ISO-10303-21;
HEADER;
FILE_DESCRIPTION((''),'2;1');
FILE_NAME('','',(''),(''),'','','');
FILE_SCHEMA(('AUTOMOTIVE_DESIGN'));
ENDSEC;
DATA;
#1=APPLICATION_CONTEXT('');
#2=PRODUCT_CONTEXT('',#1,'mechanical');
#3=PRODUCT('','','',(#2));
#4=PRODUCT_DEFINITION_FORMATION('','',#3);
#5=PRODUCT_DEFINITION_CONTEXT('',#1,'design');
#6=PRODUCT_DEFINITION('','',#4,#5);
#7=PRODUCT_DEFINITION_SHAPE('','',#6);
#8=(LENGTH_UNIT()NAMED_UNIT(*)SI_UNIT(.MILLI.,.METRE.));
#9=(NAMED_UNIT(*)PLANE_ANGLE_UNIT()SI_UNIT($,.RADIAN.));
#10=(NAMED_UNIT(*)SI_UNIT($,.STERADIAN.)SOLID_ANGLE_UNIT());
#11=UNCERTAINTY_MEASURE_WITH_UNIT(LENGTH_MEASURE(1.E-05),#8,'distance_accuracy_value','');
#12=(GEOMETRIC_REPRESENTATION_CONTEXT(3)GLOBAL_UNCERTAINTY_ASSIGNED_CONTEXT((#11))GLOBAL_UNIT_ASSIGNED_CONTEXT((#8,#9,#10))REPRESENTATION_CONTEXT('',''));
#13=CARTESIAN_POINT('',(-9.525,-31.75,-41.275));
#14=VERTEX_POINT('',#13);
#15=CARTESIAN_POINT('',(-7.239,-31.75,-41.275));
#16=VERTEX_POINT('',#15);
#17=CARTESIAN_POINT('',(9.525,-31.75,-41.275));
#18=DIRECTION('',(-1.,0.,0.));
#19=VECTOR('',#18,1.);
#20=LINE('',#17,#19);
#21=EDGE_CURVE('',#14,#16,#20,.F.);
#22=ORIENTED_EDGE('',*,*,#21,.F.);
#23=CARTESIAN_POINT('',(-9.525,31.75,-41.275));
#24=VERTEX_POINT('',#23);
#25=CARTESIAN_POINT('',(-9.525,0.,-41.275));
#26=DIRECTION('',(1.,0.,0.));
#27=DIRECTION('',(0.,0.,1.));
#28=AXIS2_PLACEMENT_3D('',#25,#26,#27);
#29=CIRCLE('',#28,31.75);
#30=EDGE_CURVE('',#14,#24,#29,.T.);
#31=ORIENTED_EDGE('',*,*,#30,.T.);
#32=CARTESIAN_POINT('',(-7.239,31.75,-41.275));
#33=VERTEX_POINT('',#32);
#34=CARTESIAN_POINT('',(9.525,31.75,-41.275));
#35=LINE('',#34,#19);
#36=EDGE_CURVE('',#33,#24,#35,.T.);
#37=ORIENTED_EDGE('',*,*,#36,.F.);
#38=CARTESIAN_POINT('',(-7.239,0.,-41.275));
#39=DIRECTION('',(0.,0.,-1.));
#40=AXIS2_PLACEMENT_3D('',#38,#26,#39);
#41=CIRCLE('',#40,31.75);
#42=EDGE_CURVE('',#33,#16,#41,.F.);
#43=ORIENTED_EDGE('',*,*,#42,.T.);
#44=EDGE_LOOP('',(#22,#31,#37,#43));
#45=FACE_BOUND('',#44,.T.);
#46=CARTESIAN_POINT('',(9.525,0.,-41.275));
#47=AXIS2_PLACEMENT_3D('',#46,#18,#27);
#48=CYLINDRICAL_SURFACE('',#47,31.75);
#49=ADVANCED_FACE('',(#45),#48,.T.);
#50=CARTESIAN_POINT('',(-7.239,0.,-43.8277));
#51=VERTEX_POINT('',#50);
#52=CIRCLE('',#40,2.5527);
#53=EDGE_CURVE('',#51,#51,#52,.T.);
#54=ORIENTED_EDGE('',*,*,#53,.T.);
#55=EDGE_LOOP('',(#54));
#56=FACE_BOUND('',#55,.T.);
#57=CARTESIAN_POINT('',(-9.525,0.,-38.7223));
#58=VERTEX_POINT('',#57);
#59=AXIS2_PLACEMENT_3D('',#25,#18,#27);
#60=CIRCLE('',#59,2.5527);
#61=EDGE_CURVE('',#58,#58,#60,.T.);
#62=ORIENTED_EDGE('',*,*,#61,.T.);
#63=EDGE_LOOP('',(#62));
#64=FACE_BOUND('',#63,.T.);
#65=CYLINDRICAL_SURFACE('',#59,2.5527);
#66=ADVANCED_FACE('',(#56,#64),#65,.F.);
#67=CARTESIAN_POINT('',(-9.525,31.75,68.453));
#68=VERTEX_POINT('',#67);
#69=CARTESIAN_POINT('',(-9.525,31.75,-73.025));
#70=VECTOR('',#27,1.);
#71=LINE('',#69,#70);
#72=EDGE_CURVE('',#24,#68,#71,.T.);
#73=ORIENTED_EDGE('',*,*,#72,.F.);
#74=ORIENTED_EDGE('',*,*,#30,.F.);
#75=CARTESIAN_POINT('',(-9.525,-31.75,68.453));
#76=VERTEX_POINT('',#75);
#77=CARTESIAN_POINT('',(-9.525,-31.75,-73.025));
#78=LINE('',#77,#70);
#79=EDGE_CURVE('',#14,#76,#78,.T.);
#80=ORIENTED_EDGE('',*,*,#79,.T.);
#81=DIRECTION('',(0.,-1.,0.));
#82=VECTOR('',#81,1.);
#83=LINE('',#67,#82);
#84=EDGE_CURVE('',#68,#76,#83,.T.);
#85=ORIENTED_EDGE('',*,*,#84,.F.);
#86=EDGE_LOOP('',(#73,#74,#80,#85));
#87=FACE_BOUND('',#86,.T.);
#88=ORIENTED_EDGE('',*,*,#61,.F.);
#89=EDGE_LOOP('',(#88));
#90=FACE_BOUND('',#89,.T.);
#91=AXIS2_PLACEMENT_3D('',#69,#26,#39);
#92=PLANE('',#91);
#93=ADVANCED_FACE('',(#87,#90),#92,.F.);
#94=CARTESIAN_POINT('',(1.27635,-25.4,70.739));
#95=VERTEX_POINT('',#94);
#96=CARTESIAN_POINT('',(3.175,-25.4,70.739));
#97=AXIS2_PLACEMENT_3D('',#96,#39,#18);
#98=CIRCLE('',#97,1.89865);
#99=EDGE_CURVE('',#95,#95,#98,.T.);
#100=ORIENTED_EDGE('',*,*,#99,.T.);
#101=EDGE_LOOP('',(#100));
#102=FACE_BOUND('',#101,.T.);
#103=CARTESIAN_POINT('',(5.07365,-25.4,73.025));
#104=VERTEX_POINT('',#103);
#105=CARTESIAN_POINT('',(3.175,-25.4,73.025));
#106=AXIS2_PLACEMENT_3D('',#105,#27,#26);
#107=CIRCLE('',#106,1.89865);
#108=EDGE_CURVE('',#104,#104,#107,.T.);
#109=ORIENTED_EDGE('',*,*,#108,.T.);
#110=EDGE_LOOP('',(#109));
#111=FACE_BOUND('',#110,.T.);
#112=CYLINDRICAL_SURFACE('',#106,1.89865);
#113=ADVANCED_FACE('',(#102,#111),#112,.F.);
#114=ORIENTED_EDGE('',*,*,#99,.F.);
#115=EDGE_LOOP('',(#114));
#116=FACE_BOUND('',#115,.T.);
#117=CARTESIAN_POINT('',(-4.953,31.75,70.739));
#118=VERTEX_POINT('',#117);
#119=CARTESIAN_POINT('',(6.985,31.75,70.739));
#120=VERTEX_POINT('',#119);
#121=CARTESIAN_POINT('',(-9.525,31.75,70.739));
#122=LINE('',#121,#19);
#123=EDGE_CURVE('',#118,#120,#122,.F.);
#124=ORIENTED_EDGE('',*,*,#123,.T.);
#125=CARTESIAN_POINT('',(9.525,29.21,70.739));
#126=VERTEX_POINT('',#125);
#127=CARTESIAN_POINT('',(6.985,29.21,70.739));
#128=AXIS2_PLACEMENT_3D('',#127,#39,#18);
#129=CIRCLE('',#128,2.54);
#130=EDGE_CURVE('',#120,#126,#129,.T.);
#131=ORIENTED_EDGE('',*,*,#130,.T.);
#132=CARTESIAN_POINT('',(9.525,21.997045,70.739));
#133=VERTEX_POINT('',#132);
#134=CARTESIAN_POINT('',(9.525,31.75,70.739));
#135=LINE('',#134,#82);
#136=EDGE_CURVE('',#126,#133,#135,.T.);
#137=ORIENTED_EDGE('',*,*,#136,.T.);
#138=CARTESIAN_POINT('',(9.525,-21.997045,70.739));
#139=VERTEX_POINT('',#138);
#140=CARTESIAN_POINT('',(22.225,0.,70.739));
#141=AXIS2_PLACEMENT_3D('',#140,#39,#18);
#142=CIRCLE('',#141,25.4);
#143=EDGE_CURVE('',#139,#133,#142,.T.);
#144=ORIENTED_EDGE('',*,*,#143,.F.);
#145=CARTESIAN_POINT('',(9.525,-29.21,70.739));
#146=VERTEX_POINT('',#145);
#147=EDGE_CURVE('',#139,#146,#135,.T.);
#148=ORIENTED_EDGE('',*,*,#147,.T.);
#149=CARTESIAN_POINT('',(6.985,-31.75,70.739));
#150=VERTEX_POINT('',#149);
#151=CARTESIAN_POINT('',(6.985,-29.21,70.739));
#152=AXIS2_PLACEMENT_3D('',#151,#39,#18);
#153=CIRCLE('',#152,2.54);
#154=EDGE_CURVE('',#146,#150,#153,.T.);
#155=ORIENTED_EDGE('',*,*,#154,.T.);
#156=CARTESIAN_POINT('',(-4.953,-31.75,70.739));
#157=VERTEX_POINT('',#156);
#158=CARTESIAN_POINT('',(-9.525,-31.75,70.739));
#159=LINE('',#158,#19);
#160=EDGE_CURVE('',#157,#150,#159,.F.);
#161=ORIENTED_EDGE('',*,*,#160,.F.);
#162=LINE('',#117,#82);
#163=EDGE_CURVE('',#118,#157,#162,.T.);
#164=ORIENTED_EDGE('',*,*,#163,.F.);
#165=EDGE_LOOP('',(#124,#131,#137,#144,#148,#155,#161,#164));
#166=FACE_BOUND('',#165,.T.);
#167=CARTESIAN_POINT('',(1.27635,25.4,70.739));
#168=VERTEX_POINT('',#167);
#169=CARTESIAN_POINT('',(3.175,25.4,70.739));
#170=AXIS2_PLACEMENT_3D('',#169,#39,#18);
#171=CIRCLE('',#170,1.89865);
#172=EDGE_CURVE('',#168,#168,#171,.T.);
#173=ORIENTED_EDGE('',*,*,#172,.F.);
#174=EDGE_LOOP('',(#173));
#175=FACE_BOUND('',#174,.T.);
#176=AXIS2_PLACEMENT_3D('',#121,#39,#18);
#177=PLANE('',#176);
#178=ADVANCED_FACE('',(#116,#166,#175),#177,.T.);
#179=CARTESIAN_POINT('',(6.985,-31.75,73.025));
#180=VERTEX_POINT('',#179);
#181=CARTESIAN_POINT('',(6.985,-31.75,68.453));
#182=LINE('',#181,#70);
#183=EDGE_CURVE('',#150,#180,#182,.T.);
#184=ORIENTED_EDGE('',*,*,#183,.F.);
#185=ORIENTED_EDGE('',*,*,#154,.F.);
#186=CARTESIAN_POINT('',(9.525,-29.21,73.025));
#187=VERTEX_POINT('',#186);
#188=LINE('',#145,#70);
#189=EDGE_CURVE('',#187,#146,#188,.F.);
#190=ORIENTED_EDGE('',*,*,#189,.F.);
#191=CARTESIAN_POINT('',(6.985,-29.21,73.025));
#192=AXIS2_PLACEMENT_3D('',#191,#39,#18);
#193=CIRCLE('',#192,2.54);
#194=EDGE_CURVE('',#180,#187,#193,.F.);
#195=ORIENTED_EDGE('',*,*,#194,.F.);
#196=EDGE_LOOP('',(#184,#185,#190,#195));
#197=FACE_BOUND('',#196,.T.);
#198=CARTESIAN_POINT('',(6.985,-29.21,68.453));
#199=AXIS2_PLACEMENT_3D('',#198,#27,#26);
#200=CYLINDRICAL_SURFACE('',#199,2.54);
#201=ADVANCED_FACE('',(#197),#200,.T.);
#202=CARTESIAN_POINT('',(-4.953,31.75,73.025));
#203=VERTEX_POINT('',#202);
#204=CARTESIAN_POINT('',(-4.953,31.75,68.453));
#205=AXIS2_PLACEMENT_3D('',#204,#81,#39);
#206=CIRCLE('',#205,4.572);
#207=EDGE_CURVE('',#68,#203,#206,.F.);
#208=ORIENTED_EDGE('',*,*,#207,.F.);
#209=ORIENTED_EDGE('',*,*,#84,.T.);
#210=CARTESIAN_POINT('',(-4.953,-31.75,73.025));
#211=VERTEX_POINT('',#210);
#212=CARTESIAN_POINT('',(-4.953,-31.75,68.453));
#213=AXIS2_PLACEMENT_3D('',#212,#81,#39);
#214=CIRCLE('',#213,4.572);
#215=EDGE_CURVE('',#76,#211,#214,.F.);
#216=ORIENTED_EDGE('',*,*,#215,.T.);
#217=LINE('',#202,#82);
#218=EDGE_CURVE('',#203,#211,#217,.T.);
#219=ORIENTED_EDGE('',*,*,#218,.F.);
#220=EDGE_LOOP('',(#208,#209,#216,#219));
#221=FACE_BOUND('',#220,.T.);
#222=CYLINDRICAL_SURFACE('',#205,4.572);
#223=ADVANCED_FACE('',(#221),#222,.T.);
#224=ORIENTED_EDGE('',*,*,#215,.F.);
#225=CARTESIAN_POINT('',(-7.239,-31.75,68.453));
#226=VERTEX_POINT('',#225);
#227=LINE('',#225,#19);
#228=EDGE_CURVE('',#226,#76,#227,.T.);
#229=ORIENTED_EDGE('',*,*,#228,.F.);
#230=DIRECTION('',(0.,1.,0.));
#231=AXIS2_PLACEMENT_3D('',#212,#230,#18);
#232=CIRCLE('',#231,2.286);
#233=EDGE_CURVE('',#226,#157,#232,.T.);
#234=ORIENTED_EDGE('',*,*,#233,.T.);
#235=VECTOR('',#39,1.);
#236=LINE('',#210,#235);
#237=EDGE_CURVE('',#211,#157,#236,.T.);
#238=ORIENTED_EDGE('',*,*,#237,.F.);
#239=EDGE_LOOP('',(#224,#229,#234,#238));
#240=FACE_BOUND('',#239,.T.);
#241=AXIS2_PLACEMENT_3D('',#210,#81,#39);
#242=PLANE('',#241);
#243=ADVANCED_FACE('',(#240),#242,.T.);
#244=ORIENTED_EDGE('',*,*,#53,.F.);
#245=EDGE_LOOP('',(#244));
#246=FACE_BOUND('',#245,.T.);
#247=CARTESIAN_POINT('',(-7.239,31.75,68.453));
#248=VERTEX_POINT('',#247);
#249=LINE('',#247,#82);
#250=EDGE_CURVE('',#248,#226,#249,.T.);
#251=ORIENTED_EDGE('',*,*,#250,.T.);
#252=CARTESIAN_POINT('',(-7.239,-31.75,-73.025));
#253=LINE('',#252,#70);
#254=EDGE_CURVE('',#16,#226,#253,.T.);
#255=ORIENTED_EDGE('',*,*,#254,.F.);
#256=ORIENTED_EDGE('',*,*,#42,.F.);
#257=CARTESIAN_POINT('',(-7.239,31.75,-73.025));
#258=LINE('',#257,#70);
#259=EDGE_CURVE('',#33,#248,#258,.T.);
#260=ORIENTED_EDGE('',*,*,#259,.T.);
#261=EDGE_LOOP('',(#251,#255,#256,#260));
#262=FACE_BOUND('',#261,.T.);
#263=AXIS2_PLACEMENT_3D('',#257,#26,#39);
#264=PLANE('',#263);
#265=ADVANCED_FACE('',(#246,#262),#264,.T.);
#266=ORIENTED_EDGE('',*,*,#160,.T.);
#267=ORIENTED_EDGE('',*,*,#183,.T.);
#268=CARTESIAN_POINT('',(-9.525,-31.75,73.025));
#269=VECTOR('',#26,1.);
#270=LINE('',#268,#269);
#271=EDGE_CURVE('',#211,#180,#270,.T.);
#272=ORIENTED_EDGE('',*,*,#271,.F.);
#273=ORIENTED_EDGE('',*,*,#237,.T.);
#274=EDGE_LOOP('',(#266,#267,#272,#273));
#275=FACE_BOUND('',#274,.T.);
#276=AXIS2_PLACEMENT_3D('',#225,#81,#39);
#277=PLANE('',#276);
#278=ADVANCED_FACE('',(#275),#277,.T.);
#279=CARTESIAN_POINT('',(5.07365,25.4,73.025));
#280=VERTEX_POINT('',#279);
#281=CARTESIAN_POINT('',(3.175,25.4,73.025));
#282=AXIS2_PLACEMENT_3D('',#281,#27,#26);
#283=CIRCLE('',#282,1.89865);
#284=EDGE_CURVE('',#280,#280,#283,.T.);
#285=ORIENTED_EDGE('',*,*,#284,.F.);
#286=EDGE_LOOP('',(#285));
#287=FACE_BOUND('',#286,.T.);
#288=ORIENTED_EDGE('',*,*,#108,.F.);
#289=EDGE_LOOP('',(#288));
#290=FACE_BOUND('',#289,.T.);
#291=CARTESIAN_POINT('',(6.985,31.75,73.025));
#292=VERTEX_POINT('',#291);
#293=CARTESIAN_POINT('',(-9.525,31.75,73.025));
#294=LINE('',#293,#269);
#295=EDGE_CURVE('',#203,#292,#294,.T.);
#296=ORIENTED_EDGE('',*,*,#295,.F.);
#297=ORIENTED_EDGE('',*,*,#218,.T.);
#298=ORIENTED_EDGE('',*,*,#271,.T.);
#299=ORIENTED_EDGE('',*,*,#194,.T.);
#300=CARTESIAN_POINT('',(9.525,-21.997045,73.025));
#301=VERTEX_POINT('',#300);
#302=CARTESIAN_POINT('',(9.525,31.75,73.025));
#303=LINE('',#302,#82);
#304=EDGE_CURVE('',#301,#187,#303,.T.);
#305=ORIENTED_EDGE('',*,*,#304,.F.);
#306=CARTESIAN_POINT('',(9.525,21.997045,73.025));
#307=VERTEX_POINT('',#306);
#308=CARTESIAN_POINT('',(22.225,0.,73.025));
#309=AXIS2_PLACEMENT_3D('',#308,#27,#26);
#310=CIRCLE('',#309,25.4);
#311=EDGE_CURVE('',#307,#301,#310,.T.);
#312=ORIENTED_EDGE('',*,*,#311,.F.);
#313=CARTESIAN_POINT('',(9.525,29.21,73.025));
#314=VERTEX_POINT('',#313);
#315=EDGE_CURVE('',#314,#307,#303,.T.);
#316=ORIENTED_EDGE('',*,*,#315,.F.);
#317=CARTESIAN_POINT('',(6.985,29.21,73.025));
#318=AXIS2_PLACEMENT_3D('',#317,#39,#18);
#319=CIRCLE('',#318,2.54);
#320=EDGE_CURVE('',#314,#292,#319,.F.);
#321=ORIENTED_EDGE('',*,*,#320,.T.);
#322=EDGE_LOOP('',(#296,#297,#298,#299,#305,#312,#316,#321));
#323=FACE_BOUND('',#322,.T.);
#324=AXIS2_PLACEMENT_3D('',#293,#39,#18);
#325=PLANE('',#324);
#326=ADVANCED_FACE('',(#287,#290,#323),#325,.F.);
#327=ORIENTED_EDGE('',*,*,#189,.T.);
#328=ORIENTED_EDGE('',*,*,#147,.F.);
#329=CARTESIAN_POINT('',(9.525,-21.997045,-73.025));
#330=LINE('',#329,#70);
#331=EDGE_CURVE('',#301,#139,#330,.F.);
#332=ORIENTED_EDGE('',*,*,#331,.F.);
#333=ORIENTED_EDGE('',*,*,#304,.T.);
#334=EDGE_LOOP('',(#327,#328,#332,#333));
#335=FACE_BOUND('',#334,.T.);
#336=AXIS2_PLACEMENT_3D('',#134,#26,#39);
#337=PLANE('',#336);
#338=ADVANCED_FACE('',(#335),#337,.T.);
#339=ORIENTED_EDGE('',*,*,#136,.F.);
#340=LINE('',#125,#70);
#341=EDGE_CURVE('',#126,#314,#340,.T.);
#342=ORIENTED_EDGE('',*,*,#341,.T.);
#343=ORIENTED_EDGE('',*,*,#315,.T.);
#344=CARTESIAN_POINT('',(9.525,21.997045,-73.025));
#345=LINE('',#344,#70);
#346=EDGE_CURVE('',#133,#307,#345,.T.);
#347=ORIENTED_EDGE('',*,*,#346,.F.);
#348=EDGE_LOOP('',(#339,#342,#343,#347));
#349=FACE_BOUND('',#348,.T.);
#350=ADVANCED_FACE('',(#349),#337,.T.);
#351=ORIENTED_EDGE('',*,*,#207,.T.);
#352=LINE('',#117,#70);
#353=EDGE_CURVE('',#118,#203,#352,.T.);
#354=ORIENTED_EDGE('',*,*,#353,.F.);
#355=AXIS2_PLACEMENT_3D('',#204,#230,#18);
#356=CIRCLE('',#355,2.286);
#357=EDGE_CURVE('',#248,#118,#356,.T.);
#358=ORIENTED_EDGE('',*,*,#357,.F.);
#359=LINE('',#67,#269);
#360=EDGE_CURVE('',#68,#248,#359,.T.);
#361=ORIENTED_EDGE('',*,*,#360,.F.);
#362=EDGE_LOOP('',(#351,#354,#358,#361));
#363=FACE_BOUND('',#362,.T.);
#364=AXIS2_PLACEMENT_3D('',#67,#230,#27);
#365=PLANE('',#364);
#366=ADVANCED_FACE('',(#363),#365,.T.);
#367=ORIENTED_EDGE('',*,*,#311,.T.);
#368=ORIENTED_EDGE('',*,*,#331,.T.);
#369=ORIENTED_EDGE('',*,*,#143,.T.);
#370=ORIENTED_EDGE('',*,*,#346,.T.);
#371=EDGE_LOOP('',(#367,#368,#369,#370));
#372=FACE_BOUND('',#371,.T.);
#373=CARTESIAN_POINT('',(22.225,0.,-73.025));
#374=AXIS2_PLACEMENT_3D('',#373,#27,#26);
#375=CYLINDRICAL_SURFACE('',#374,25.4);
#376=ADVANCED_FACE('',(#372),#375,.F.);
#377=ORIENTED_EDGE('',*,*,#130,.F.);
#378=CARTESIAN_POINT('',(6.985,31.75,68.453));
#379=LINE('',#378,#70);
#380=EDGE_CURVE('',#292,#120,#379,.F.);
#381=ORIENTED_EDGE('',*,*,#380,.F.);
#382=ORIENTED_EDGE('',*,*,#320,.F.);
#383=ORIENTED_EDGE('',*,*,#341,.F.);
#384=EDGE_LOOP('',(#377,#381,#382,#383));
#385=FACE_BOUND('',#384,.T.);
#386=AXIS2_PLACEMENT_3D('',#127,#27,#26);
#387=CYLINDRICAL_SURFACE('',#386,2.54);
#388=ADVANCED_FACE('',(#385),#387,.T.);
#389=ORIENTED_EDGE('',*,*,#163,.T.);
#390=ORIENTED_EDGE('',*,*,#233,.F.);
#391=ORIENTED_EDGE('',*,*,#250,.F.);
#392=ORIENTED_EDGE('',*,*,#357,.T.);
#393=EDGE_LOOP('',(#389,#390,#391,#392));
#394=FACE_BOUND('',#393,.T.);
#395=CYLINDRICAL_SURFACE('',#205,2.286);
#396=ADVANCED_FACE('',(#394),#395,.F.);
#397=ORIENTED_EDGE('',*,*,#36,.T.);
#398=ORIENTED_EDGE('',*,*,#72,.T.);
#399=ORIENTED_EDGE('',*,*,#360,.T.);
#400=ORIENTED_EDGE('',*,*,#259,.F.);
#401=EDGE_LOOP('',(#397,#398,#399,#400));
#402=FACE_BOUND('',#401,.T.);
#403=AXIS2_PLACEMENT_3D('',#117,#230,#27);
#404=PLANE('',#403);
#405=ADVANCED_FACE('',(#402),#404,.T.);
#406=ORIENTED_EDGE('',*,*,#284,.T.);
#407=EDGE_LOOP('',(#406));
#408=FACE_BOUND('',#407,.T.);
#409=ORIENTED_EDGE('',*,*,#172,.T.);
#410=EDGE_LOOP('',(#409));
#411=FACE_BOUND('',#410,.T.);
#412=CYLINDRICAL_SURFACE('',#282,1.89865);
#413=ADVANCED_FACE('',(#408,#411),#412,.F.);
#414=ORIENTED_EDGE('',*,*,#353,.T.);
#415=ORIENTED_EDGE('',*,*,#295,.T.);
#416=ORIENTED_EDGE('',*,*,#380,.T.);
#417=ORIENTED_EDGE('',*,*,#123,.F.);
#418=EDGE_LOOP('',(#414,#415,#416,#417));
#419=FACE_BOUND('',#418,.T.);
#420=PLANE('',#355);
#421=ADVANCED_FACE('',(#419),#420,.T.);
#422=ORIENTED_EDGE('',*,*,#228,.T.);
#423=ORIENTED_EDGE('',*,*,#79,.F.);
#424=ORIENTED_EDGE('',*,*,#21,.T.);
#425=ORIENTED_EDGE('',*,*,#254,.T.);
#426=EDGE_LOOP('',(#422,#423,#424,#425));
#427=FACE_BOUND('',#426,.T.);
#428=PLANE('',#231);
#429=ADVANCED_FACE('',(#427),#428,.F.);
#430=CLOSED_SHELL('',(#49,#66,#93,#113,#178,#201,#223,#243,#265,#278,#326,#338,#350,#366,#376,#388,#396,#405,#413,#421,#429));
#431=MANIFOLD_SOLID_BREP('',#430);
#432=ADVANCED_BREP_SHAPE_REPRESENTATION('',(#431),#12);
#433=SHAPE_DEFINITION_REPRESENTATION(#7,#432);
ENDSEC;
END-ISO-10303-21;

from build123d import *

# Parameters (mm, degrees)
BASE_FLANGE1_DEPTH           = 31.75
SKETCH6_R                    = 25.4
CUT_EXTRUDE1_DEPTH           = 150.764450471
FILLET1_R                    = 2.54
CUT_EXTRUDE2_DEPTH           = 82.875610685
F_7_0_201_DIAMETER_HOLE1_D   = 5.1054
F_25_0_1495_DIAMETER_HOLE1_D = 3.7973


# Sheet-metal steps are written as plain solids
with BuildPart() as part:
    # Sketch1 → Base-Flange1 (new, symmetric)
    with BuildSketch(Plane(origin=(0, 0, 0), x_dir=(-1, 0, 0), z_dir=(0, 1, 0))):
        with BuildLine():
            Line((9.525, -73.025), (9.525, 68.453))
            ThreePointArc((9.525, 68.453), (8.185892204, 71.685892204), (4.953, 73.025))
            Line((4.953, 73.025), (-9.525, 73.025))
            Line((-9.525, 73.025), (-9.525, 70.739))
            Line((-9.525, 70.739), (4.953, 70.739))
            ThreePointArc((4.953, 70.739), (6.569446102, 70.069446102), (7.239, 68.453))
            Line((7.239, 68.453), (7.239, -73.025))
            Line((7.239, -73.025), (9.525, -73.025))
        make_face()
    extrude(amount=BASE_FLANGE1_DEPTH, both=True)

    # Sketch6 → Cut-Extrude1 (cut, through all)
    with BuildSketch(Plane.XY.offset(73.025)):
        with Locations((22.225, 0)):
            Circle(SKETCH6_R)
    extrude(amount=-CUT_EXTRUDE1_DEPTH, mode=Mode.SUBTRACT)

    # Fillet1
    fillet1_edges = [part.edges().sort_by_distance(p)[0] for p in [
        (9.525, 31.75, 71.882),
        (9.525, -31.75, 71.882),
    ]]
    fillet(fillet1_edges, radius=FILLET1_R)

    # Sketch7 → Cut-Extrude2 (cut, through all)
    with BuildSketch(Plane(origin=(-9.525, 0, 0), x_dir=(0, -1, 0), z_dir=(-1, 0, 0))):
        with BuildLine():
            Line((-31.75, -41.275), (-31.75, -92.075))
            Line((-31.75, -92.075), (31.75, -92.075))
            Line((31.75, -92.075), (31.75, -41.275))
            ThreePointArc((31.75, -41.275), (0, -73.025), (-31.75, -41.275))
        make_face()
    extrude(amount=-CUT_EXTRUDE2_DEPTH, mode=Mode.SUBTRACT)

    # #7 (0.201) Diameter Hole1 (through all)
    with Locations(Plane.ZY.offset(9.525)):
        with Locations((-41.275, 0)):
            Hole(F_7_0_201_DIAMETER_HOLE1_D / 2)

    # #25 (0.1495) Diameter Hole1 (through all)
    with Locations(Plane.XY.offset(73.025)):
        with Locations((3.175, 25.4), (3.175, -25.4)):
            Hole(F_25_0_1495_DIAMETER_HOLE1_D / 2)


solid = part.part
